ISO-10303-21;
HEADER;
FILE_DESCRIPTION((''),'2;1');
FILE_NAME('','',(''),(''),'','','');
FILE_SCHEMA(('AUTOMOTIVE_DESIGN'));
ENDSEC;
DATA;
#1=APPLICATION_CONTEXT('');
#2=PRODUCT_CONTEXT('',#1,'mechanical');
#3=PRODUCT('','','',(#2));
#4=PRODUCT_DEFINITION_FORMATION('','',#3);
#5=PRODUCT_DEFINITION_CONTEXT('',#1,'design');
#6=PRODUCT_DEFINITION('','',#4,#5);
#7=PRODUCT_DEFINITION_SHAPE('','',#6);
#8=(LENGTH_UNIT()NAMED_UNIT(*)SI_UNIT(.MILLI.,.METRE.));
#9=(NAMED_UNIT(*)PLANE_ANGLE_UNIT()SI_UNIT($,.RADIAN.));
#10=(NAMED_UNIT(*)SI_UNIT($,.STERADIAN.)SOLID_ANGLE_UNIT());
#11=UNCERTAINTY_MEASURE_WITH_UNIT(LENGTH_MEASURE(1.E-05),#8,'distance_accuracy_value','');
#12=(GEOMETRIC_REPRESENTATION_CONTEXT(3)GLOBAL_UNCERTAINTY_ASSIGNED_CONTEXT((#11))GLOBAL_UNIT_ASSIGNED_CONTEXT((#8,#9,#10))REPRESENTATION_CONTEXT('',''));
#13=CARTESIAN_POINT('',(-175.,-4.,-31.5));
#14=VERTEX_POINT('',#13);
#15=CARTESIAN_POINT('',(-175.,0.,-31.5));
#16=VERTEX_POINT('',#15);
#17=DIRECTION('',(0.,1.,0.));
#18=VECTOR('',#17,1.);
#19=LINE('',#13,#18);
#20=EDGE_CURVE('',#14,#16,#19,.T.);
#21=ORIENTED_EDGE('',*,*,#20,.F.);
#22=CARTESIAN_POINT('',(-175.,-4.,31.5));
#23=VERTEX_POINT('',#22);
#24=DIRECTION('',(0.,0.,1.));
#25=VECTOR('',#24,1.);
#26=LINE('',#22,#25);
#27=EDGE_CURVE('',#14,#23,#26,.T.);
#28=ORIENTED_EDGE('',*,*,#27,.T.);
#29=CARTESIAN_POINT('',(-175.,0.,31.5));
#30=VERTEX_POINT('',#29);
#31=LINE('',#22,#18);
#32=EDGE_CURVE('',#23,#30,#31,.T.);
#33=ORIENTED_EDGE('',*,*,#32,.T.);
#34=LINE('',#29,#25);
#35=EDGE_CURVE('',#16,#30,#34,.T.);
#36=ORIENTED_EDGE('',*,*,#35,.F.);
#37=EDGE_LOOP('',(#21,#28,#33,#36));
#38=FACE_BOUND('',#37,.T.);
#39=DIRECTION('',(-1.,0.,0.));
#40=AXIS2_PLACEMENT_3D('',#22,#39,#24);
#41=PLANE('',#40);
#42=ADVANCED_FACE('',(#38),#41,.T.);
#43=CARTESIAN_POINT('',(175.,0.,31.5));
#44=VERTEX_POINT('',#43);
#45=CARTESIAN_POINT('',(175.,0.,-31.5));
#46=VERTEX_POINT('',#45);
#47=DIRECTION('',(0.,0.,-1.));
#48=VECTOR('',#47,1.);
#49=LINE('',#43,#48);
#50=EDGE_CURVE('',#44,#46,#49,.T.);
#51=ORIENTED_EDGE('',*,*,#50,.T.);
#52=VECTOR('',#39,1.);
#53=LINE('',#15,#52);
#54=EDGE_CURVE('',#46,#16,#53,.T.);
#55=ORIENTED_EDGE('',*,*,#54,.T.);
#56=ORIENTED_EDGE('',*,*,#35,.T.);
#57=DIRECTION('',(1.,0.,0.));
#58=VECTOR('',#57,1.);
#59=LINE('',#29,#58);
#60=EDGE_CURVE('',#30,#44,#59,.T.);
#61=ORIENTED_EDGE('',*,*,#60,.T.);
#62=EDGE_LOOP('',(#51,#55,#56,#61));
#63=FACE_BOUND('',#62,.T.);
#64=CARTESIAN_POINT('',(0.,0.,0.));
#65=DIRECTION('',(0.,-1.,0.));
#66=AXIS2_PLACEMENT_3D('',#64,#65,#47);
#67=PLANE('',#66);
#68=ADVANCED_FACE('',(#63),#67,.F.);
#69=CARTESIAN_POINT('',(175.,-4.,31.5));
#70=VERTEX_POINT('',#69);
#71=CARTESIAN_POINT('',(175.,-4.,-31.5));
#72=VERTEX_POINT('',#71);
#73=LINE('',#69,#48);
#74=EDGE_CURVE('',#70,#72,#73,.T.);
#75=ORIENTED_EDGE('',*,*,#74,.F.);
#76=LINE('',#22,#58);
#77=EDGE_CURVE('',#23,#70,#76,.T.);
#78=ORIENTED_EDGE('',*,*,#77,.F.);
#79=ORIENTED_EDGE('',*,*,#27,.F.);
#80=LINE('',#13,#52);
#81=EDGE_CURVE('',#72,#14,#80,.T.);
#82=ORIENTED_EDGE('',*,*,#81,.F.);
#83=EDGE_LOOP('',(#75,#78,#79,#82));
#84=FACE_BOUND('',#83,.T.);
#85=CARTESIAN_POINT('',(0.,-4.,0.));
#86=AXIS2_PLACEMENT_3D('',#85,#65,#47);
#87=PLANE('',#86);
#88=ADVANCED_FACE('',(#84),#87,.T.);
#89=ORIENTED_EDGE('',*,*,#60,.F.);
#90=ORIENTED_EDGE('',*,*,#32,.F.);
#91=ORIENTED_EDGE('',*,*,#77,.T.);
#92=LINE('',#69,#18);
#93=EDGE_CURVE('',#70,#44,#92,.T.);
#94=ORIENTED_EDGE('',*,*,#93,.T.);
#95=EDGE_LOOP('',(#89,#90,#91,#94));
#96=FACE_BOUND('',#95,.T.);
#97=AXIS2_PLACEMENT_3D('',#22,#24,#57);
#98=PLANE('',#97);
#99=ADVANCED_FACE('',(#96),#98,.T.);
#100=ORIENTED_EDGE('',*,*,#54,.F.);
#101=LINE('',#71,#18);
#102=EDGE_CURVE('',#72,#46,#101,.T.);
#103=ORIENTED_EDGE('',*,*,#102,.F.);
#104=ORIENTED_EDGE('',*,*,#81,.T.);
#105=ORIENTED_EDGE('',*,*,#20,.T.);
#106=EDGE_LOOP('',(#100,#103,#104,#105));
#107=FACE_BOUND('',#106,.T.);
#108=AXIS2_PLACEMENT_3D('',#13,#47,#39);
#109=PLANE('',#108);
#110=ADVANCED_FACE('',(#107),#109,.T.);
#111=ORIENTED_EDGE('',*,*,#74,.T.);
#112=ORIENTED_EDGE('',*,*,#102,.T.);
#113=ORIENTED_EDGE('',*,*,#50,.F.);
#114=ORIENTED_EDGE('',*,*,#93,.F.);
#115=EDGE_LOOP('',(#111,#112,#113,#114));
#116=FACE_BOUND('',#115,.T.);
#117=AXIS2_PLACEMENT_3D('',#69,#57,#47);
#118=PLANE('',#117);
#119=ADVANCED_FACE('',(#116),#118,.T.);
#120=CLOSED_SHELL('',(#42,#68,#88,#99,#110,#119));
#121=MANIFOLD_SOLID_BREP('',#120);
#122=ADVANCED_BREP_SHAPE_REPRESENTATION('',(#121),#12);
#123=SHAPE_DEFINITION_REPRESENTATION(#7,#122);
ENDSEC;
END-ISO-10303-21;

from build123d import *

# Parameters (mm, degrees)
SKETCH1_W          = 350
SKETCH1_H          = 63
BASE_FLANGE1_DEPTH = 4


# Sheet-metal steps are written as plain solids
with BuildPart() as part:
    # Sketch1 → Base-Flange1 (new body)
    with BuildSketch(Plane(origin=(0, 0, 0), x_dir=(1, 0, 0), z_dir=(0, 1, 0))):
        Rectangle(SKETCH1_W, SKETCH1_H)
    extrude(amount=-BASE_FLANGE1_DEPTH)


solid = part.part
